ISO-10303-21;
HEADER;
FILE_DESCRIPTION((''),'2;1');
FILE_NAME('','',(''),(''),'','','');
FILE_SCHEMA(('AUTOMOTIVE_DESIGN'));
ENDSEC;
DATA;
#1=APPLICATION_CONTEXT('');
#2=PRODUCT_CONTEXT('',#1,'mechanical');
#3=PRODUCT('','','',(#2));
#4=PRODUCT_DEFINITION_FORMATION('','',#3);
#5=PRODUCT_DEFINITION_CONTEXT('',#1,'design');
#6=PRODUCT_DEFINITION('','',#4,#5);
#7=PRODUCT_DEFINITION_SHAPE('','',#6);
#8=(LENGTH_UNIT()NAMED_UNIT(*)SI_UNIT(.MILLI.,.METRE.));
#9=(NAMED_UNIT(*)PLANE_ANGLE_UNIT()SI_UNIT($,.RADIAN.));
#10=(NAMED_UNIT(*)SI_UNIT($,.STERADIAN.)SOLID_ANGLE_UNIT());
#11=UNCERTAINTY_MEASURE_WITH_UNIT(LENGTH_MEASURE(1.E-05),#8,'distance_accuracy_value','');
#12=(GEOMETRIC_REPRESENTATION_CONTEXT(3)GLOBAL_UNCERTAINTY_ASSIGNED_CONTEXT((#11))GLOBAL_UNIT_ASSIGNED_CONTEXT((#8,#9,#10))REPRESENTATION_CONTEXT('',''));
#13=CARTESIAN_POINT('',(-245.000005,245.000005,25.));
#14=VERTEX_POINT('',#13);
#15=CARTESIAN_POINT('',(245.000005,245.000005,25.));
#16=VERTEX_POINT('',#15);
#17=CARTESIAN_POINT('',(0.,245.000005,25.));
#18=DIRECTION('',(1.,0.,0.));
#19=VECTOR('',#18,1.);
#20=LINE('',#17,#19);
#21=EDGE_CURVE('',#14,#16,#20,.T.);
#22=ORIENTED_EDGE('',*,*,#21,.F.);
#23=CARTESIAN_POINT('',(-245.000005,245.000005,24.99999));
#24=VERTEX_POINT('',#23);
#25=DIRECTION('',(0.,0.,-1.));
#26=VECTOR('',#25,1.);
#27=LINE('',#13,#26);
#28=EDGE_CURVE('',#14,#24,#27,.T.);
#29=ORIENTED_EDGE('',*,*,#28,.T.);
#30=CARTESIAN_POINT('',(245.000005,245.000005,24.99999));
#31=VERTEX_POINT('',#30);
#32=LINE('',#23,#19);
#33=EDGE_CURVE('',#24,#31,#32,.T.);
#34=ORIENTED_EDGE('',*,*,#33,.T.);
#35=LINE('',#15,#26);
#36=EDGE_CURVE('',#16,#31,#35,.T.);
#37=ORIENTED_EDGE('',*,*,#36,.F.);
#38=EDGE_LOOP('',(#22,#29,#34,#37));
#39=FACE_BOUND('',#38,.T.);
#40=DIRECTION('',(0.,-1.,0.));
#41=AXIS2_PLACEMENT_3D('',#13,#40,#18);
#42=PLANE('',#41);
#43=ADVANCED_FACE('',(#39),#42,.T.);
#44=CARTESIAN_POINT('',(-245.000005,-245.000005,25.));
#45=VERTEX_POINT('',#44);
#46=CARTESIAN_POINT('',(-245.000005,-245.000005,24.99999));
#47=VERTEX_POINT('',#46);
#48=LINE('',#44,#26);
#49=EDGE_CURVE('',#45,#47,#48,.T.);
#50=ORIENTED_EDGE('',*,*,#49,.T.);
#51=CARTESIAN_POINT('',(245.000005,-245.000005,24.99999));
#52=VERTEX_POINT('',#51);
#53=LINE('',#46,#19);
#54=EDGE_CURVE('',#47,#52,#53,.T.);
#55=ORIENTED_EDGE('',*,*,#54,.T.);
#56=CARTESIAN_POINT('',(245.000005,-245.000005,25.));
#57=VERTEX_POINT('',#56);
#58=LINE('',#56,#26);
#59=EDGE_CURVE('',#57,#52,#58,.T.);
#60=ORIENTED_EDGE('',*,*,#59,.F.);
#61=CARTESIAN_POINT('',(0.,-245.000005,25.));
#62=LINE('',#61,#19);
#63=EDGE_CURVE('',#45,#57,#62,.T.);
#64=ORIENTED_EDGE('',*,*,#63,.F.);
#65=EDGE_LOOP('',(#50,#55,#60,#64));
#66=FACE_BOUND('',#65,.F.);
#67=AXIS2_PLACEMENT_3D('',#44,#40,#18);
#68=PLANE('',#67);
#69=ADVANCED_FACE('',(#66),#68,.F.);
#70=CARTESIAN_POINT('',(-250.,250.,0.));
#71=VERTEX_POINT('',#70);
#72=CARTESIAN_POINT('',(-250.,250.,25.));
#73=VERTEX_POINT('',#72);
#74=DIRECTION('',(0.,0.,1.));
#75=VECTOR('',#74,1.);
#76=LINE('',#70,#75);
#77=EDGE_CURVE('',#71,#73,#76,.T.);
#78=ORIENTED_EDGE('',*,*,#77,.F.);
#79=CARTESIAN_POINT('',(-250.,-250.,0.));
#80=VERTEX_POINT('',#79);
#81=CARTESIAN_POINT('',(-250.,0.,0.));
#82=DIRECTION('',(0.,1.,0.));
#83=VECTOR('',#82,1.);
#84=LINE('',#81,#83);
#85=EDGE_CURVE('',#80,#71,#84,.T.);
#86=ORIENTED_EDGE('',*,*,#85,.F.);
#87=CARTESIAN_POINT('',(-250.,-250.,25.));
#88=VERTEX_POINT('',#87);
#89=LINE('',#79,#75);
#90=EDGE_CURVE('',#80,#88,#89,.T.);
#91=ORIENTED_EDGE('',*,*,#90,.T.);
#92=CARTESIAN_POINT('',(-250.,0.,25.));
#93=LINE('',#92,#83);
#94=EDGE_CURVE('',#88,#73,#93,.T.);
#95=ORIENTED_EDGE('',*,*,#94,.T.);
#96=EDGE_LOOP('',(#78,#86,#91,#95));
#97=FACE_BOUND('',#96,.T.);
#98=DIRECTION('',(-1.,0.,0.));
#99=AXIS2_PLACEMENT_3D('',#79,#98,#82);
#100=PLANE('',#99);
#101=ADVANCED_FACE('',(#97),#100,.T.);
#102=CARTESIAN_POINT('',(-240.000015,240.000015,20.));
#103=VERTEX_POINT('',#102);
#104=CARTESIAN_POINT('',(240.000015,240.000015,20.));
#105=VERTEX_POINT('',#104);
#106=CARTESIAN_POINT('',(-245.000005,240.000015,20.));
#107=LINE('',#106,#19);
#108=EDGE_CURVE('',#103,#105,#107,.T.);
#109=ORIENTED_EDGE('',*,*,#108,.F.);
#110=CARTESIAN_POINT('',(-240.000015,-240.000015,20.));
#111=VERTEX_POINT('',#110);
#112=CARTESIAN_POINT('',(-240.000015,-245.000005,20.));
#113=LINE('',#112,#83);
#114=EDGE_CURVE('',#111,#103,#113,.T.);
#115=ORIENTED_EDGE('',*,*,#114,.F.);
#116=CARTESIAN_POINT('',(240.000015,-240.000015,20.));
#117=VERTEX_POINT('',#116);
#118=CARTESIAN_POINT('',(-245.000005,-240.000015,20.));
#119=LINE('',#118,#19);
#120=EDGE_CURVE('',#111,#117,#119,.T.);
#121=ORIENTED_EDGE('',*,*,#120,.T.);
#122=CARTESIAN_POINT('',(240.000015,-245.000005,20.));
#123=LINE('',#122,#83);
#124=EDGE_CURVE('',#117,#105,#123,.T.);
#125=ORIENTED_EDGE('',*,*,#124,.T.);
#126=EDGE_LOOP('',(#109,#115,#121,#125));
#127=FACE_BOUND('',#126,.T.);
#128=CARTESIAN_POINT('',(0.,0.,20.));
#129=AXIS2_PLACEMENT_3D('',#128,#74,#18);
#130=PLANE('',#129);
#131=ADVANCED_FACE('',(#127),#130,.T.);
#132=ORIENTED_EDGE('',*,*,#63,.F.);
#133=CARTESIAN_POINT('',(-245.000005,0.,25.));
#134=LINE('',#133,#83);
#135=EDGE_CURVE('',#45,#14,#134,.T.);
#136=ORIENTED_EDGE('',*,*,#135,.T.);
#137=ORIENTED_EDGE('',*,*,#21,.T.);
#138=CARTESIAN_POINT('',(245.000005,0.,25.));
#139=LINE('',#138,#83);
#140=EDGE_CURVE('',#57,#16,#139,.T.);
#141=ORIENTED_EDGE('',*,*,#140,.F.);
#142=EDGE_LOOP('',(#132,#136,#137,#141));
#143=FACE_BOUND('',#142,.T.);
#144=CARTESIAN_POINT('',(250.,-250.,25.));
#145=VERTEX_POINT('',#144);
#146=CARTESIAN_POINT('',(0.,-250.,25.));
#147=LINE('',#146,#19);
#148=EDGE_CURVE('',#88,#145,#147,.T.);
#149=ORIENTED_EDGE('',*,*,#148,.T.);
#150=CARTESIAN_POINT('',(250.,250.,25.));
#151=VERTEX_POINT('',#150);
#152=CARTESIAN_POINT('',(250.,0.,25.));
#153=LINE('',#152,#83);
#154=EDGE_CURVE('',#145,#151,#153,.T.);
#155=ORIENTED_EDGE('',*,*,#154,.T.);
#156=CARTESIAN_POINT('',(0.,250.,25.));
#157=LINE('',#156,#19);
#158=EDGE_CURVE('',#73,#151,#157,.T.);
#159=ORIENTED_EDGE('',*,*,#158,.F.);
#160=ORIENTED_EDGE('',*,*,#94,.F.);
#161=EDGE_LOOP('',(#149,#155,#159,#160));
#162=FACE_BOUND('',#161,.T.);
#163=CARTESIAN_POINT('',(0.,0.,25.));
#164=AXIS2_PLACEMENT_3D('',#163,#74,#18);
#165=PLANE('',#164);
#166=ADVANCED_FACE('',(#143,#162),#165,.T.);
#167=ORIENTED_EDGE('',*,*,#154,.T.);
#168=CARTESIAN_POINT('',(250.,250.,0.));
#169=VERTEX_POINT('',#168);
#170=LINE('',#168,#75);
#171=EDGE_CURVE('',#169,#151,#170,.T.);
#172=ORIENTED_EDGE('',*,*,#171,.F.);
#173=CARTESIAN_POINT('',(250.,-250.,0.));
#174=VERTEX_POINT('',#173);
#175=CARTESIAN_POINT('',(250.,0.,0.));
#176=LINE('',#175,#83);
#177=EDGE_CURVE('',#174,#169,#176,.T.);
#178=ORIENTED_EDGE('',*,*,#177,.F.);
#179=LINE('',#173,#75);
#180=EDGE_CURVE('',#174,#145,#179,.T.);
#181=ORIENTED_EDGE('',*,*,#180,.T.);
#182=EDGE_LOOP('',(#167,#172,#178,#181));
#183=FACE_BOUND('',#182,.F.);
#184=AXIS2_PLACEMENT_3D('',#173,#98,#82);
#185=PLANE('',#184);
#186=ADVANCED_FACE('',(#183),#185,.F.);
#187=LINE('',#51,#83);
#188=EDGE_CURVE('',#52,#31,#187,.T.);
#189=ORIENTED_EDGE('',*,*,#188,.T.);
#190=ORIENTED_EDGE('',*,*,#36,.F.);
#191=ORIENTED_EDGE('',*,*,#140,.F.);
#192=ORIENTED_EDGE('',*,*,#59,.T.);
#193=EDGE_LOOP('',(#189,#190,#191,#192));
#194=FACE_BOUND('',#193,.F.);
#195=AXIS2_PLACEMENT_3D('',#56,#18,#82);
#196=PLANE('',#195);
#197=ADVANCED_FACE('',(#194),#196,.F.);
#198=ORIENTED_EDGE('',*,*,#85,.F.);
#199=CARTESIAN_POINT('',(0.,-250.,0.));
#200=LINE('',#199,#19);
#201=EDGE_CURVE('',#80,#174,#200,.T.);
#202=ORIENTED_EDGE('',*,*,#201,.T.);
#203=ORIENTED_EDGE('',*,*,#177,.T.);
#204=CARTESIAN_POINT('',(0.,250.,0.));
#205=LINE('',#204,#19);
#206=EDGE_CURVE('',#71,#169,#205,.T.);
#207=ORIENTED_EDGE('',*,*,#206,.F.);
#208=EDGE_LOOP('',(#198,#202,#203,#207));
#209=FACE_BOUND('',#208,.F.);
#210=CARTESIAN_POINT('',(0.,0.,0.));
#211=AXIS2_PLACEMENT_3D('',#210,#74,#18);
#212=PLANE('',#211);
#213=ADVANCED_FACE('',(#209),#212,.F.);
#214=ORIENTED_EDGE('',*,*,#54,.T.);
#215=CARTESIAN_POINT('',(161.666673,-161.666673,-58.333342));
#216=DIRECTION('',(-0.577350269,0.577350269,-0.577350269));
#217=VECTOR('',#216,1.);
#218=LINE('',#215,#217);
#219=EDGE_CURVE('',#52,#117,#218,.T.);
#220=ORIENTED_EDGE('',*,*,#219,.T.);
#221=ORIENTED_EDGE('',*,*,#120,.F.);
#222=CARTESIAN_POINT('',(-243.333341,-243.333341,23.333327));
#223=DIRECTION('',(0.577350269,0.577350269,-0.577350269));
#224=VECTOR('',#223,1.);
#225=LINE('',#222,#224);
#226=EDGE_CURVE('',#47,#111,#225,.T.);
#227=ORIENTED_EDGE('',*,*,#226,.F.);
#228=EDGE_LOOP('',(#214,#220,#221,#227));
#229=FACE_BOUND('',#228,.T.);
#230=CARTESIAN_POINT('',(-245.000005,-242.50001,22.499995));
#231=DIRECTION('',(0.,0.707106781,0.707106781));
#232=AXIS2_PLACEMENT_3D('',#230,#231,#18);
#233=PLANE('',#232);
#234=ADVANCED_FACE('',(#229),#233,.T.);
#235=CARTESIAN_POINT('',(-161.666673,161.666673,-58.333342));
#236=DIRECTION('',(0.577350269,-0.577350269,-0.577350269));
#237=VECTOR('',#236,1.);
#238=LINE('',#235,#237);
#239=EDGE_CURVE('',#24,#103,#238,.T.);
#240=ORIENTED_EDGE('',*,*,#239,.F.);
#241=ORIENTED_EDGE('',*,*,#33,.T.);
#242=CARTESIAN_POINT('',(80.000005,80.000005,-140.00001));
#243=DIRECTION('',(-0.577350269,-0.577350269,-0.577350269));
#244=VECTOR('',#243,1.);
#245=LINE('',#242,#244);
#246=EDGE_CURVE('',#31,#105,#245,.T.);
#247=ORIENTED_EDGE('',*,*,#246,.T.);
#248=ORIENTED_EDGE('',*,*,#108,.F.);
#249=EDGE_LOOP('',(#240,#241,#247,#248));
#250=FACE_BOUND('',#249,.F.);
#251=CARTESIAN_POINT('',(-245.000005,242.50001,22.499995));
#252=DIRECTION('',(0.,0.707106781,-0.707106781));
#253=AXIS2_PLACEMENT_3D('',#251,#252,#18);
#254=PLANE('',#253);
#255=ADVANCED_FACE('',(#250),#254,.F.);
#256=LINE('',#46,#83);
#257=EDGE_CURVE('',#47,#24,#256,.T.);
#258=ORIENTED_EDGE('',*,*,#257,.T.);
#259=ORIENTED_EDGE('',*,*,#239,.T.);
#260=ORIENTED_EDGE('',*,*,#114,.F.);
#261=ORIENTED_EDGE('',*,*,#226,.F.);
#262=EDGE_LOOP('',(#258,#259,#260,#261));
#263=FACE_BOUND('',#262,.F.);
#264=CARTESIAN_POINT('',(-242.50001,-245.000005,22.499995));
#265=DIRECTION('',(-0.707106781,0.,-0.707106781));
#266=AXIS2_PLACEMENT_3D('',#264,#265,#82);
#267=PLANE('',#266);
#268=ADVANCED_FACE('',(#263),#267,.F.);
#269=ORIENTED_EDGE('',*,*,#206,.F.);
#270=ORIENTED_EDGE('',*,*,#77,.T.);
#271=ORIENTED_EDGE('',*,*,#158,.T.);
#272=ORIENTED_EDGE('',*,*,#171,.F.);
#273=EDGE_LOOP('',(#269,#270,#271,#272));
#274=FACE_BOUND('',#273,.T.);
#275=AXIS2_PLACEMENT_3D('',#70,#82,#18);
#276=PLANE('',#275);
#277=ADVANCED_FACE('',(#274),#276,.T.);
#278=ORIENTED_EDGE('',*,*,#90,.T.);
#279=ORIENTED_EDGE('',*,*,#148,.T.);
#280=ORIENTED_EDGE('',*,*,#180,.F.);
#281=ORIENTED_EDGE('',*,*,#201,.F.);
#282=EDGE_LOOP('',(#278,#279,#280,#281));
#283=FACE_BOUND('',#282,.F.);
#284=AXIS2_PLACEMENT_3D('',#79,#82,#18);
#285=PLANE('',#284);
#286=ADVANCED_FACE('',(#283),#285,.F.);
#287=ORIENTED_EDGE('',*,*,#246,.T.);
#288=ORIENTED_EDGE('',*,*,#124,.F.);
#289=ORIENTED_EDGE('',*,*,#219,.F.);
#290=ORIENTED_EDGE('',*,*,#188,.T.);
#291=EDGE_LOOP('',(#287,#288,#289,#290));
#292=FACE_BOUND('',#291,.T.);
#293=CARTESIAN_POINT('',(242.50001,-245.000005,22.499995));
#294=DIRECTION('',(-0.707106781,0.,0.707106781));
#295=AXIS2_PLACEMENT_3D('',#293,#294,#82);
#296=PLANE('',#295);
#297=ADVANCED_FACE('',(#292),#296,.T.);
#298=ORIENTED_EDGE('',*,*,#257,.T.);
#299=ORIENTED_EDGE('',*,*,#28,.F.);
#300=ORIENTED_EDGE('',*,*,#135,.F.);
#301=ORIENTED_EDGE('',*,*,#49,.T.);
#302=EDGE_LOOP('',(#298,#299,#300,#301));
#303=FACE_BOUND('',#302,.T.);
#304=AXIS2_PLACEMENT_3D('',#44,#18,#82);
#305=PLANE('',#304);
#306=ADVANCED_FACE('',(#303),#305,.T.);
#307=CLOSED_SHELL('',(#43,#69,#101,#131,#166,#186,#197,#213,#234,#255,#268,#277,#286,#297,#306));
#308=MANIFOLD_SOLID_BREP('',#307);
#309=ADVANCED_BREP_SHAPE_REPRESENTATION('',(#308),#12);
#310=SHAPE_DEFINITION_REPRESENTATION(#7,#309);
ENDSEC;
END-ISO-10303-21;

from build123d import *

# Parameters (mm, degrees)
F0_W     = 500
F0_H     = 500
F1_DEPTH = 25
F2_W     = 490.0000095367
F2_H     = 490.0000095367
F3_DEPTH = 5
F4_SIZE  = 4.99999


# Not quite as in the source:
# - a fillet or chamfer is up to 0.001 mm smaller than in the source, because OpenCascade refuses the exact size


with BuildPart() as f1:
    # F0 (on Top) → F1 (new body)
    with BuildSketch(Plane.XY):
        Rectangle(F0_W, F0_H)
    extrude(amount=F1_DEPTH)

    # F2 (on face) → F3 (cut)
    with BuildSketch(Plane.XY.offset(25)):
        Rectangle(F2_W, F2_H)
    extrude(amount=-F3_DEPTH, mode=Mode.SUBTRACT)

    # F4 (size 5 in the source; OpenCascade refuses exactly that, so slightly less here)
    f4_edges = [f1.edges().sort_by_distance(p)[0] for p in [
        (0, -245.000005, 20),
        (245.000005, 0, 20),
        (0, 245.000005, 20),
        (-245.000005, 0, 20),
    ]]
    chamfer(f4_edges, length=F4_SIZE)


solid = f1.part
